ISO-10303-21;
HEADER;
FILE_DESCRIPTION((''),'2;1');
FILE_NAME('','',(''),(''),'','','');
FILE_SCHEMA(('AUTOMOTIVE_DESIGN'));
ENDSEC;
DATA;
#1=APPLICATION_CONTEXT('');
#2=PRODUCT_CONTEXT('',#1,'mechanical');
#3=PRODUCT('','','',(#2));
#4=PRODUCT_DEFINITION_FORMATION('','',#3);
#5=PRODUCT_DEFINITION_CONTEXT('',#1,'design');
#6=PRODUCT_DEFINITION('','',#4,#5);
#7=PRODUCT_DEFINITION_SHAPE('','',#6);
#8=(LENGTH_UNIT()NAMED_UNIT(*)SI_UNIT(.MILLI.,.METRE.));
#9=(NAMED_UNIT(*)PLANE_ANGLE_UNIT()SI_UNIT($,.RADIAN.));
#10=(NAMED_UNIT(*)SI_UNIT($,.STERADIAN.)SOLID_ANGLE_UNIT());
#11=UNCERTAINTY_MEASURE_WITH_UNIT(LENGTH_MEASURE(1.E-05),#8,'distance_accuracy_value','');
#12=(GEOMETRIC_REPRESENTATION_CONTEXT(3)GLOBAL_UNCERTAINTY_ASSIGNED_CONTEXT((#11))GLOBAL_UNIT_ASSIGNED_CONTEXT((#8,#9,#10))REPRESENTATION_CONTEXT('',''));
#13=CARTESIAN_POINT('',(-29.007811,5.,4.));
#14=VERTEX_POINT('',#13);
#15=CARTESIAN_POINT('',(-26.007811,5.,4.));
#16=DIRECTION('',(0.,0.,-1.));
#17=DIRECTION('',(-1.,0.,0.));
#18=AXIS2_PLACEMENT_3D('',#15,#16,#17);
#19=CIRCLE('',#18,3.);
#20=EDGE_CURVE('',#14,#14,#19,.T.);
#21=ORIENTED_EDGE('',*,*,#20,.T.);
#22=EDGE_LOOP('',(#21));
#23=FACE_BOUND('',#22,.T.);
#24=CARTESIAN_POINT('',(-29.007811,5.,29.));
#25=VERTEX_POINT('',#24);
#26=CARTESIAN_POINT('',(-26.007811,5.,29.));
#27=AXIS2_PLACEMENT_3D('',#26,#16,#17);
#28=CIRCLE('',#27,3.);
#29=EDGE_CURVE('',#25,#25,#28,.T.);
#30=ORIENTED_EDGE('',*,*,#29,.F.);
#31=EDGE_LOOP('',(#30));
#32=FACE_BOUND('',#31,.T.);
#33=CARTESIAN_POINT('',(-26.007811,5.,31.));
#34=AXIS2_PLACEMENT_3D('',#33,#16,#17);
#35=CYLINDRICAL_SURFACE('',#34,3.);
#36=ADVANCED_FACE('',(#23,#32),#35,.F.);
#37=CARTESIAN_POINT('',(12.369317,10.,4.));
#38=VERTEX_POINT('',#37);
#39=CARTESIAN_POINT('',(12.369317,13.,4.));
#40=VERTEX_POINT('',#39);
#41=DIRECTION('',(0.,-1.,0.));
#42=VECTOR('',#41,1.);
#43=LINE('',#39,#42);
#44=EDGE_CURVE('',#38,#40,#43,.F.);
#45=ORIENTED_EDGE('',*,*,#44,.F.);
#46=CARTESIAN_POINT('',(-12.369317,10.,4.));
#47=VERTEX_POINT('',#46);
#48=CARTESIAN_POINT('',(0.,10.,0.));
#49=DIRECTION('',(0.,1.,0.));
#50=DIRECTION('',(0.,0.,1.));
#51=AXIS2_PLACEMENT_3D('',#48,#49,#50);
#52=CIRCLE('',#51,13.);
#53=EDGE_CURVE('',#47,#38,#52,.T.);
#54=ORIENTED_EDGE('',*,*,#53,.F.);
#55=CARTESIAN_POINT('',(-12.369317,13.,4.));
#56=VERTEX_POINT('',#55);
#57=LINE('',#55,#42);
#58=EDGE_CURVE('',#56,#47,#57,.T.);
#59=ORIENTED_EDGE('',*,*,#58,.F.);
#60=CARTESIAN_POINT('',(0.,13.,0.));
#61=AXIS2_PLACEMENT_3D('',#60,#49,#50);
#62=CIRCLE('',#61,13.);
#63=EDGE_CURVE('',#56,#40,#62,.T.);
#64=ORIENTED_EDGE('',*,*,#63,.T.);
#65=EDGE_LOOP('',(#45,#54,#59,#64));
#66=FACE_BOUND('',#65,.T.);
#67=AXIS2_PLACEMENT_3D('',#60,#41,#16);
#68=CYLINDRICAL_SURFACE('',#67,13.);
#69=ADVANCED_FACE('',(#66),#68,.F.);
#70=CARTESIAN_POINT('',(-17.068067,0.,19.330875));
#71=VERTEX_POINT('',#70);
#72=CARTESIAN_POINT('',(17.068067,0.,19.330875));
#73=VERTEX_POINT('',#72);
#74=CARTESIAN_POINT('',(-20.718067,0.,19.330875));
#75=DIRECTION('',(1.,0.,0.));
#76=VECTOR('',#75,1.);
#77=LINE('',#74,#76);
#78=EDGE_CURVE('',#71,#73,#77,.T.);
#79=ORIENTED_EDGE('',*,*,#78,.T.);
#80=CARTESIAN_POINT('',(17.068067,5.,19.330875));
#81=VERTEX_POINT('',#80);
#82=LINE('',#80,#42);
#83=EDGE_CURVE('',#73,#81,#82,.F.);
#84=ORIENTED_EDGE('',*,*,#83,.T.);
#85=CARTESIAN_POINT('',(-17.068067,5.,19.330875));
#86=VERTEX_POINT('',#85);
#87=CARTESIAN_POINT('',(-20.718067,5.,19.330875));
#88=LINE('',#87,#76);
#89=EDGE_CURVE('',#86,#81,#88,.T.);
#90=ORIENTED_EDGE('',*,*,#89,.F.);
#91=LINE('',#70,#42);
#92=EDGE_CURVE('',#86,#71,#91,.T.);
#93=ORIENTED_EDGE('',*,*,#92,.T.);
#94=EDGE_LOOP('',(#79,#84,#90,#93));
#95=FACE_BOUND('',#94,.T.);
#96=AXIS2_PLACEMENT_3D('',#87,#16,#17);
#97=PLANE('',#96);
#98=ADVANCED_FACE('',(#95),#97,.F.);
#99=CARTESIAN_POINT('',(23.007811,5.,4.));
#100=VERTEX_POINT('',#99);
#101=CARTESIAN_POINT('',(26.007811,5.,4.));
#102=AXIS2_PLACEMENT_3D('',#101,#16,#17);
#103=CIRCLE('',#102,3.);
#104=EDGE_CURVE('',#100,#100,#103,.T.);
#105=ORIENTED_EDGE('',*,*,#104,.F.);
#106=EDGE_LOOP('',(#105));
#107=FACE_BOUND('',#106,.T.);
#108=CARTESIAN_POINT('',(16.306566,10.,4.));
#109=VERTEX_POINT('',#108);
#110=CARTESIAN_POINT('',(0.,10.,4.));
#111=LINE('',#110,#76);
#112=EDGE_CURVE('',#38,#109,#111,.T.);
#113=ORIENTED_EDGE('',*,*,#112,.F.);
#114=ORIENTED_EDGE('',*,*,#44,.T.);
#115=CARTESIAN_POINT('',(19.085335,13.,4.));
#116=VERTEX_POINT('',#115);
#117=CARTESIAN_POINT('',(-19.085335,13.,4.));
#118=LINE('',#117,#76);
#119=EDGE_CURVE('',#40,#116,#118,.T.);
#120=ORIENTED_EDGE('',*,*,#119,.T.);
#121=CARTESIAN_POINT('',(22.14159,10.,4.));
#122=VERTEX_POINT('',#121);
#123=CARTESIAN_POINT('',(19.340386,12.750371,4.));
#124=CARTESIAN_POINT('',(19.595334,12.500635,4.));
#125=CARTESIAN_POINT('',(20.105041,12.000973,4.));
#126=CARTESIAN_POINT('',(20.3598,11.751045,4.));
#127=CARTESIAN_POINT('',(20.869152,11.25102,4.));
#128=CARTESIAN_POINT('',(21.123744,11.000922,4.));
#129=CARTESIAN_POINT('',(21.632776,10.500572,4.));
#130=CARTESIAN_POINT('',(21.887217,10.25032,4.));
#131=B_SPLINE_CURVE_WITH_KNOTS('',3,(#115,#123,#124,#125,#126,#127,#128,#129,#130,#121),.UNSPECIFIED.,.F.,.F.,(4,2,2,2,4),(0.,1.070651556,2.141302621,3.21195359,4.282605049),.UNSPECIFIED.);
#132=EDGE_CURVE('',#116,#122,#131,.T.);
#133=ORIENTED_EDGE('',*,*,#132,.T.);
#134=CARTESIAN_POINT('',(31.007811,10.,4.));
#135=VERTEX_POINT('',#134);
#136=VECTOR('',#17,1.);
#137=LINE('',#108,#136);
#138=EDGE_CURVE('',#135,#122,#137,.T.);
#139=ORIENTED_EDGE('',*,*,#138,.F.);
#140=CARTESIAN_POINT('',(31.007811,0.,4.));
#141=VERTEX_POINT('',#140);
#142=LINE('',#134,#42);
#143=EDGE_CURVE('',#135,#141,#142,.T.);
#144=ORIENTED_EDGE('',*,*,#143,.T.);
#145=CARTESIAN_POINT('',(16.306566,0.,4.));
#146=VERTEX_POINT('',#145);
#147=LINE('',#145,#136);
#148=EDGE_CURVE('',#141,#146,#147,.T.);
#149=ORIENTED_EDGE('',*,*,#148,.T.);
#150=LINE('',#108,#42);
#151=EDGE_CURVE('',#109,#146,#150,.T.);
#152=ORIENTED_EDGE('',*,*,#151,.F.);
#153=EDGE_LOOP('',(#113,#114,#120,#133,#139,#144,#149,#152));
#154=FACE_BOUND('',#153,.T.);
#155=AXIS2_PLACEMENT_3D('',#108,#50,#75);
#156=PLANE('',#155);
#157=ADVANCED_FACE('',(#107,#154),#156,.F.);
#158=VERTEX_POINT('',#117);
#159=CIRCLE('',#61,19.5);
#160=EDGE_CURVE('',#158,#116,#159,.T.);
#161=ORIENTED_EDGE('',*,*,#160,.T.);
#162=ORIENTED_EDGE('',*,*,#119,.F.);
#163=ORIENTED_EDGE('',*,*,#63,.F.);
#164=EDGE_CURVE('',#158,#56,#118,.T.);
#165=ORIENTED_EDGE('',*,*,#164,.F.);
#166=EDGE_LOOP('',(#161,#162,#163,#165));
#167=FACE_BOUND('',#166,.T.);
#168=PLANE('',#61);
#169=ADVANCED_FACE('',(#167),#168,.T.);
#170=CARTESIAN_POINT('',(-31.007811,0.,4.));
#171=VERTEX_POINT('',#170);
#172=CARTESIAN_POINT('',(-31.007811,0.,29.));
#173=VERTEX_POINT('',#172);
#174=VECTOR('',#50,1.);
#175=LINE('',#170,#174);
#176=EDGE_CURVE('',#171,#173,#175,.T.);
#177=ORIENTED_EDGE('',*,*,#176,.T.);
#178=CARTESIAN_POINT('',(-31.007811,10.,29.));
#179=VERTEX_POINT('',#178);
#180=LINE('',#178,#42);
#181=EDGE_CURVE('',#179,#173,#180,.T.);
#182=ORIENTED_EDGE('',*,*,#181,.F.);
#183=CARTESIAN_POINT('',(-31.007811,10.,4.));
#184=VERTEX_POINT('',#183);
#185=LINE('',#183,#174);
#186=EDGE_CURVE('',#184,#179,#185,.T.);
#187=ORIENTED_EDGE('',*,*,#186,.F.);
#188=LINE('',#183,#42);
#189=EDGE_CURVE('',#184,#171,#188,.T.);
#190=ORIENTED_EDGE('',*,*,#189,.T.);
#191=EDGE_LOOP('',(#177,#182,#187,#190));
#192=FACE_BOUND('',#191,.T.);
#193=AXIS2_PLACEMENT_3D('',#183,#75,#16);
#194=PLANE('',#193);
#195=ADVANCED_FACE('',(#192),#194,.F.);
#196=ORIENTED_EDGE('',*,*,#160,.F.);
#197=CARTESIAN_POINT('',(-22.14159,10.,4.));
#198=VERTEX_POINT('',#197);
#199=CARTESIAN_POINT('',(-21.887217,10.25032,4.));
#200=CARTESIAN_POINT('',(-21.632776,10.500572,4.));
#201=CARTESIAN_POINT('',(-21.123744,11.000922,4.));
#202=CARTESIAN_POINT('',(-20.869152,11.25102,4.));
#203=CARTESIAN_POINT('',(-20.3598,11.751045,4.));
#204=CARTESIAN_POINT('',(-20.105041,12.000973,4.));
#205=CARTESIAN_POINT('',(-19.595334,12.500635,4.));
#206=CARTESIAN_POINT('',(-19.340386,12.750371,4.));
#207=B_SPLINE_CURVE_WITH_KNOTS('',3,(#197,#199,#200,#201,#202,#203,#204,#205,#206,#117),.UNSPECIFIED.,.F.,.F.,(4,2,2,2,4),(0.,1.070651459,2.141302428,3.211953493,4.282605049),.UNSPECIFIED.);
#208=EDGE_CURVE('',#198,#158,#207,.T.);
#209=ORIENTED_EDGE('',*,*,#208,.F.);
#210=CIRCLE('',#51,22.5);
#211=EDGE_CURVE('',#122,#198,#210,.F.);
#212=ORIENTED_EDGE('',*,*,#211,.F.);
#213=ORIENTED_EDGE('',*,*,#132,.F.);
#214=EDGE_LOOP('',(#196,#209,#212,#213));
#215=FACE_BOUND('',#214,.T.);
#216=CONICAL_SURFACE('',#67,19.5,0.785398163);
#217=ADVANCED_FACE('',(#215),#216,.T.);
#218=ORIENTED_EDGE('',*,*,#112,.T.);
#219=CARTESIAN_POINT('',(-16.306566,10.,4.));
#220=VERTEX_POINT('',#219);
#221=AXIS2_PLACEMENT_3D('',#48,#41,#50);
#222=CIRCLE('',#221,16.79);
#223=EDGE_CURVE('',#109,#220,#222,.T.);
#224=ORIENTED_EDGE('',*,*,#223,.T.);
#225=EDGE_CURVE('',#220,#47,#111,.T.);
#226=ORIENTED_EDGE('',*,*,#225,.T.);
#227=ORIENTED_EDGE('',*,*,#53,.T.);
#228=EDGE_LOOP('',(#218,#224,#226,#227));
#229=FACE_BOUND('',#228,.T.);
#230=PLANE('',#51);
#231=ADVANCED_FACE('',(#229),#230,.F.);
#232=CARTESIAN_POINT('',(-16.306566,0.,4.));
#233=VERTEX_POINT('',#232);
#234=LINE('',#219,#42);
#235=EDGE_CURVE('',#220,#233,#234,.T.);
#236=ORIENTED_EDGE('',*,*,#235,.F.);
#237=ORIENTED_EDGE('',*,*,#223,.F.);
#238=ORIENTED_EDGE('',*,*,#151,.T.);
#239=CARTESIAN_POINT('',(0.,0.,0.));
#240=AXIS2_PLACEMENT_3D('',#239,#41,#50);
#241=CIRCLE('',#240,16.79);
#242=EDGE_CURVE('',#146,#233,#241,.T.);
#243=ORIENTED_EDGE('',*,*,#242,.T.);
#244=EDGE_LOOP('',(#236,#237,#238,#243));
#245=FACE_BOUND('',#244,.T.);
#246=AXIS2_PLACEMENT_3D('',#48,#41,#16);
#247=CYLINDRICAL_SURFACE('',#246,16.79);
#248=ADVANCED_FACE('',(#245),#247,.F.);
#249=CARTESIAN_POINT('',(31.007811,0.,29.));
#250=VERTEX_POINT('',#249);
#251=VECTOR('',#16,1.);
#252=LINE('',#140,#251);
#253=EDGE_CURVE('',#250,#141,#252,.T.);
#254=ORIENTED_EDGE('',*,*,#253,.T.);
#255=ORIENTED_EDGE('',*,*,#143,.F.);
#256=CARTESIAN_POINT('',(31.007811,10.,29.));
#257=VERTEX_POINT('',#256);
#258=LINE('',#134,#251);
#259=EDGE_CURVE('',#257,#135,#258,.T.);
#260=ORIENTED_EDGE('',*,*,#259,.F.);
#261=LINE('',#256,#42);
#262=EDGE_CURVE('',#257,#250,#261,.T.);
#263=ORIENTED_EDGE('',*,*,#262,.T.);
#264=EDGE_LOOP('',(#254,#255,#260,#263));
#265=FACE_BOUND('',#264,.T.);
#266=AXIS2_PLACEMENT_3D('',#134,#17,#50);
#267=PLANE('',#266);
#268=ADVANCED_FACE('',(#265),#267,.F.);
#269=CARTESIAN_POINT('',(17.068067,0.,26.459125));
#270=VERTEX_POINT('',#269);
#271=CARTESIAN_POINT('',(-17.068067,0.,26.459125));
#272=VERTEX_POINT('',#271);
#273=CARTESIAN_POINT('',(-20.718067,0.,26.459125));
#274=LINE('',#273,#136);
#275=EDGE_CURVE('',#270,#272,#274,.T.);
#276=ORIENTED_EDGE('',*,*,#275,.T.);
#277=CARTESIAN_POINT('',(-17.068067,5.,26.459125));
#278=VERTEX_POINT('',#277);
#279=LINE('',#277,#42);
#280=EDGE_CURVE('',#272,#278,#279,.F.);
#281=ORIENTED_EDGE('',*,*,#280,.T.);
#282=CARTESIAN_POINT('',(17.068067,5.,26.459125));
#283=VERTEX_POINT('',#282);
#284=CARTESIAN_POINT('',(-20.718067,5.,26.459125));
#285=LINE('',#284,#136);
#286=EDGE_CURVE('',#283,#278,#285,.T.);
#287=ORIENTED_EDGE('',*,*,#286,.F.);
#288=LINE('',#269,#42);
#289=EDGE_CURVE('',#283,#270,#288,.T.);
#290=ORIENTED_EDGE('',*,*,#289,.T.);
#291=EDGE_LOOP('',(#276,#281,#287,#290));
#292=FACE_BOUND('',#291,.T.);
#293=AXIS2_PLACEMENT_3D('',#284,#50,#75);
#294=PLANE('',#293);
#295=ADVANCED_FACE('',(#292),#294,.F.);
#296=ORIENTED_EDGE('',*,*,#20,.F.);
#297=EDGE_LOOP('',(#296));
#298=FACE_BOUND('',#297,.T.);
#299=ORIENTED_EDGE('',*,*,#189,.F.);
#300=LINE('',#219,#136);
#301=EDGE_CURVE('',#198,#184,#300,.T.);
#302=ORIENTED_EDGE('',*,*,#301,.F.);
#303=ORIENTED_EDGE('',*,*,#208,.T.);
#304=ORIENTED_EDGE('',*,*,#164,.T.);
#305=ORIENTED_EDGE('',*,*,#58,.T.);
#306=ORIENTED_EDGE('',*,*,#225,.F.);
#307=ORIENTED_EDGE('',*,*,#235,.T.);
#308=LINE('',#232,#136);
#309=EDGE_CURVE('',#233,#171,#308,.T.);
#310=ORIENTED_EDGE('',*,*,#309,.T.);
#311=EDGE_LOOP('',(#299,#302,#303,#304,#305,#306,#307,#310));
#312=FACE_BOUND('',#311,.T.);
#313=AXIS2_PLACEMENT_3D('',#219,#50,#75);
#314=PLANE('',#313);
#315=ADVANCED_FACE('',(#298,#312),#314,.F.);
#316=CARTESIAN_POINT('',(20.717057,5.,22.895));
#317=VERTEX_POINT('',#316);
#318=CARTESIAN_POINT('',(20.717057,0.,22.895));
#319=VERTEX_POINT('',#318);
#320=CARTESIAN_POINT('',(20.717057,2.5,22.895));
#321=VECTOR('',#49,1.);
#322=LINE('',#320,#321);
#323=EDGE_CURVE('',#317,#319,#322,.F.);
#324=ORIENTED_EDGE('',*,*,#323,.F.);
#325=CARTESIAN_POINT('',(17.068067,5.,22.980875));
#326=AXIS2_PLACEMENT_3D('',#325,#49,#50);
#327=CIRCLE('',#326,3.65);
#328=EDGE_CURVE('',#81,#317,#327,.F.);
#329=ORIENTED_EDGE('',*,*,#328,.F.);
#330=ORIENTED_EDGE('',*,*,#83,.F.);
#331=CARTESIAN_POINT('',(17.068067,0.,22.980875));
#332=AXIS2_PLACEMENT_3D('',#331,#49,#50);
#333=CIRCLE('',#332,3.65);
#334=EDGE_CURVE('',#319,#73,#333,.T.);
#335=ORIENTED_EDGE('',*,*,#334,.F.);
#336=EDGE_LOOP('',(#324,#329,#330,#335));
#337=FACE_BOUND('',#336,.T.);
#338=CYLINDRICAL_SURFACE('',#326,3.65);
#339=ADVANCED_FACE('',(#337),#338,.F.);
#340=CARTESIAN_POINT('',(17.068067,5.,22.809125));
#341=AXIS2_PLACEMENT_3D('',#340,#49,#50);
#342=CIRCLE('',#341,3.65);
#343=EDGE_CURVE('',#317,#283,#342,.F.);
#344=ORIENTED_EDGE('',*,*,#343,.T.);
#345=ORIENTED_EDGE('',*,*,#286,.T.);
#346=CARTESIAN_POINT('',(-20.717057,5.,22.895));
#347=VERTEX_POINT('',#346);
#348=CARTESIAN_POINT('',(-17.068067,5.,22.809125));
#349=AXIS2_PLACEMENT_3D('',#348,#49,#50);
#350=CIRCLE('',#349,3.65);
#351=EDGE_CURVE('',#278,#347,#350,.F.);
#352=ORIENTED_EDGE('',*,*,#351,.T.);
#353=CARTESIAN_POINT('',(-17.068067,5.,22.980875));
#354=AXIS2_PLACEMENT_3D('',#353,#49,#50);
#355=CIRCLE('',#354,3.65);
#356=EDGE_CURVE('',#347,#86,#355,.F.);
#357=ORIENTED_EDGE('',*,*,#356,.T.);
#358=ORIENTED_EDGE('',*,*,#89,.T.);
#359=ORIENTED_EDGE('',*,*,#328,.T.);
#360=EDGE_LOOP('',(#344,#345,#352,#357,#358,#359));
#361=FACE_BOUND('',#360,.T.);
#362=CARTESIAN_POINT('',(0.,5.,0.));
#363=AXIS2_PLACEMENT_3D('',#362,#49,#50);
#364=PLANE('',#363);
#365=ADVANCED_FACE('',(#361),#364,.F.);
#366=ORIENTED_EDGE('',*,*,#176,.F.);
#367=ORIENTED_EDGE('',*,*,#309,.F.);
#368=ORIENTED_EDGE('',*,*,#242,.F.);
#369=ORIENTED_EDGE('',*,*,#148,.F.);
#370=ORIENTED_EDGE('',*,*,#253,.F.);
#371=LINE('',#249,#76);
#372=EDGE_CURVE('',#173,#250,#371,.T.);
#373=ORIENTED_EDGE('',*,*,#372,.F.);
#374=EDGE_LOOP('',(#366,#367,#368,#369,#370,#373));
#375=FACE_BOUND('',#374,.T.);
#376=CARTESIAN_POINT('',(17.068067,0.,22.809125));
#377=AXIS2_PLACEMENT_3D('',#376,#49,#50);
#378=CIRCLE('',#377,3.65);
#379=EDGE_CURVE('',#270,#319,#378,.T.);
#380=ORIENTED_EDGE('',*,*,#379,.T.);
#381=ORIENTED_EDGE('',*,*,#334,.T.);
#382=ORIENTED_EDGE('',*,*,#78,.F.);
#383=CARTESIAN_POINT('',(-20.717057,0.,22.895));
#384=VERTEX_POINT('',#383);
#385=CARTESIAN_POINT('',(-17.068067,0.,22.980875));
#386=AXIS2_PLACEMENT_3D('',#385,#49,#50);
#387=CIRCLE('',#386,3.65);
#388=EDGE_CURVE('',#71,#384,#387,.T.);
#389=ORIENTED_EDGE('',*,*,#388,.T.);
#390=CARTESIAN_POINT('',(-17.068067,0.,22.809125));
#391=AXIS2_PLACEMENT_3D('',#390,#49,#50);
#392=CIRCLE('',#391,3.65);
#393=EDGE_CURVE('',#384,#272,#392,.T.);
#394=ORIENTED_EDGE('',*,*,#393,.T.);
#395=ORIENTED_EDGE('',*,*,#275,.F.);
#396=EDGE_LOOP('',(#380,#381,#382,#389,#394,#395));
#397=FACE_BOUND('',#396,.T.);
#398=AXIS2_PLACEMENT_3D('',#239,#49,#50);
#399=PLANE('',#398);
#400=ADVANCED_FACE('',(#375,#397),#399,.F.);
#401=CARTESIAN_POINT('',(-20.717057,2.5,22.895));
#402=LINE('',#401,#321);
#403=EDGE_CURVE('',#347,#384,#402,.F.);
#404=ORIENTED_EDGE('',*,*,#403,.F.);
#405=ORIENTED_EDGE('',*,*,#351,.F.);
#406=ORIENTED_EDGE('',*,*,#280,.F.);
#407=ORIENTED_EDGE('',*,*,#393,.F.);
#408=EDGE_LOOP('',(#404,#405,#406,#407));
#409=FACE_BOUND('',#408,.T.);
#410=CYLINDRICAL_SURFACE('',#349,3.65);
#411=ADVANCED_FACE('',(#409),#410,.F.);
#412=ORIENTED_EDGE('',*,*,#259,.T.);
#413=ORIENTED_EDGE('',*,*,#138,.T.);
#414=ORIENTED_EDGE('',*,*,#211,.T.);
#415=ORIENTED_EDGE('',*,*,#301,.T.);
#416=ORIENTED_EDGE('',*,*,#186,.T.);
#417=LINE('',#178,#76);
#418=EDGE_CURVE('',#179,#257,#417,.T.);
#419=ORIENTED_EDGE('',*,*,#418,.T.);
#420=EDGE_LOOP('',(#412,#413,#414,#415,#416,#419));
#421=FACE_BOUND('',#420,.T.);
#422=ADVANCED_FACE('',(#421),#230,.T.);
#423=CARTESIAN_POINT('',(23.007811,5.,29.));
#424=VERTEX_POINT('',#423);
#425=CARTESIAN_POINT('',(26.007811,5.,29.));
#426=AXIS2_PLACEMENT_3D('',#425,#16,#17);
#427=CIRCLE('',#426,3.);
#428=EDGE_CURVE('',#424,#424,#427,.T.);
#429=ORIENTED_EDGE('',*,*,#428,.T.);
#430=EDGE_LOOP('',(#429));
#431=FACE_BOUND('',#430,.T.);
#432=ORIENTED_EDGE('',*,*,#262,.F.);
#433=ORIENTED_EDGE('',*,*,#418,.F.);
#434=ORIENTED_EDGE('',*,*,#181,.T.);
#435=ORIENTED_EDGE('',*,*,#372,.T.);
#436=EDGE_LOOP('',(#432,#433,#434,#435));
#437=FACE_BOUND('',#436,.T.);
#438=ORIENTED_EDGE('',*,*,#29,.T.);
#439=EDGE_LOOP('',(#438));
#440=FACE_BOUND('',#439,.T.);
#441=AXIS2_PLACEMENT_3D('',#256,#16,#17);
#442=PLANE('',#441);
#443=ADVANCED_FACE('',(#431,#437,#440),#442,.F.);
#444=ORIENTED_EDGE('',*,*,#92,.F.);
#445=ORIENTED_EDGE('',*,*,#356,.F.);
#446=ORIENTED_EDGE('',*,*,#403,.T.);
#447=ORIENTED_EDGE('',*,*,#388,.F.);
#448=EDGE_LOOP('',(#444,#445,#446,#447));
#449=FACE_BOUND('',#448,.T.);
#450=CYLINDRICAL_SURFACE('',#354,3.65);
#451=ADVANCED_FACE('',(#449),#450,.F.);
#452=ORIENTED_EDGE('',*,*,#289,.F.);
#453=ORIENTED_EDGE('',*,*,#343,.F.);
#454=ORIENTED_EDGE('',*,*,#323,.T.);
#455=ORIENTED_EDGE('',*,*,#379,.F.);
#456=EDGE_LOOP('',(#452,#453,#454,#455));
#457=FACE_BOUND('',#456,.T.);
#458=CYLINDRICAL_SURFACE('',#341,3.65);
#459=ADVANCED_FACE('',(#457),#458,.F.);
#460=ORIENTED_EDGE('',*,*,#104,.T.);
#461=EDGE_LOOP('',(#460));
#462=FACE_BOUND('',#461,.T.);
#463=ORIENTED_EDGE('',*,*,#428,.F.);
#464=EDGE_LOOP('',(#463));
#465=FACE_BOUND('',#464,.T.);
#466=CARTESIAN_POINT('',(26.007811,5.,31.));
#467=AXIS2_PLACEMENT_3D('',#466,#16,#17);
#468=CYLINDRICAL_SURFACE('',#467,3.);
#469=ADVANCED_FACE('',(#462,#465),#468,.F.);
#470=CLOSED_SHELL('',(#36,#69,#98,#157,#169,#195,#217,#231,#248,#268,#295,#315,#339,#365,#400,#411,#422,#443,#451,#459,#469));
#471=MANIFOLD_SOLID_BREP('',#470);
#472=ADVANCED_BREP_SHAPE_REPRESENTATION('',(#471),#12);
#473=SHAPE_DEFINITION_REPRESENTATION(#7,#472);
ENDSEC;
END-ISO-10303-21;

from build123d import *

# Parameters (mm, degrees)
BOSS_EXTRUDE1_DEPTH = 10
SKETCH2_R           = 3
CUT_EXTRUDE1_DEPTH  = 27
SKETCH4_R           = 19.5
SKETCH4_R_2         = 13
BOSS_EXTRUDE2_DEPTH = 3
CUT_EXTRUDE2_DEPTH  = 8
CHAMFER1_SIZE       = 3
SKETCH6_W           = 41.436134758
SKETCH6_H           = 7.128250764
CUT_EXTRUDE3_DEPTH  = 5
FILLET1_R           = 3.65


# Some blends are built 0.0001 mm under size
with BuildPart() as part:
    # Sketch1 → Boss-Extrude1 (new body)
    with BuildSketch(Plane(origin=(0, 0, 0), x_dir=(1, 0, 0), z_dir=(0, 1, 0))):
        with BuildLine():
            Line((-16.306566162, -4), (-31.007810594, -4))
            Line((-31.007810594, -4), (-31.007810594, -29))
            Line((-31.007810594, -29), (-22, -29))
            Line((-22, -29), (22, -29))
            Line((22, -29), (31.007810594, -29))
            Line((31.007810594, -29), (31.007810594, -4))
            Line((31.007810594, -4), (16.306566162, -4))
            ThreePointArc((16.306566162, -4), (0, -16.79), (-16.306566162, -4))
        make_face()
    extrude(amount=BOSS_EXTRUDE1_DEPTH)

    # Sketch2 → Cut-Extrude1 (cut)
    with BuildSketch(Plane(origin=(0, 0, 4), x_dir=(-1, 0, 0), z_dir=(0, 0, -1))):
        with Locations((-26.007810594, 5)):
            Circle(SKETCH2_R)
        with Locations((26.007810594, 5)):
            Circle(SKETCH2_R)
    extrude(amount=-CUT_EXTRUDE1_DEPTH, mode=Mode.SUBTRACT)

    # Sketch4 → Boss-Extrude2 (add)
    with BuildSketch(Plane(origin=(0, 10, 0), x_dir=(1, 0, 0), z_dir=(0, 1, 0))):
        with Locations(Location((0, 0, 0), (0, 0, 348.162995844))):
            Circle(SKETCH4_R)
        with Locations(Location((0, 0, 0), (0, 0, 270))):
            Circle(SKETCH4_R_2, mode=Mode.SUBTRACT)
    extrude(amount=BOSS_EXTRUDE2_DEPTH)

    # Sketch5 → Cut-Extrude2 (cut)
    with BuildSketch(Plane(origin=(0, 13, 0), x_dir=(1, 0, 0), z_dir=(0, 1, 0))):
        Polygon((-19.085334684, -4), (-23.625672229, -4), (-23.625672229, 24.113520256), (25.409917146, 24.113520256), (25.409917146, -4), align=None)
    extrude(amount=-CUT_EXTRUDE2_DEPTH, mode=Mode.SUBTRACT)

    # Chamfer1
    chamfer1_edges = [part.edges().sort_by_distance(p)[0] for p in [
        (0, 10, 19.5),
    ]]
    chamfer(chamfer1_edges, length=CHAMFER1_SIZE - 0.0001)  # a hair under: the kernel refuses the full size

    # Sketch6 → Cut-Extrude3 (cut)
    with BuildSketch(Plane.XZ):
        with Locations((0, 22.895)):
            Rectangle(SKETCH6_W, SKETCH6_H)
    extrude(amount=-CUT_EXTRUDE3_DEPTH, mode=Mode.SUBTRACT)

    # Fillet1
    # the kernel refuses this fillet: 3.65 mm, written as the material it adds along each edge
    with BuildSketch(Plane(origin=(-20.718067379, 0, 19.330874618), x_dir=(0, 0, 1), z_dir=(0, 1, 0))) as fillet1_piece_1:
        with BuildLine():
            CenterArc((FILLET1_R, FILLET1_R), FILLET1_R, 180, 90)
            Line((0, FILLET1_R), (0, 0))
            Line((0, 0), (FILLET1_R, 0))
        make_face()
    extrude(amount=5)
    with BuildSketch(Plane(origin=(-20.718067379, 0, 26.459125382), x_dir=(0, 0, -1), z_dir=(0, 1, 0)), Plane(origin=(20.718067379, 0, 26.459125382), x_dir=(-1, 0, 0), z_dir=(0, 1, 0)), Plane(origin=(20.718067379, 0, 19.330874618), x_dir=(0, 0, 1), z_dir=(0, 1, 0))) as fillet1_piece_2:
        with BuildLine():
            CenterArc((FILLET1_R, -FILLET1_R), FILLET1_R, 90, 90)
            Line((0, -FILLET1_R), (0, 0))
            Line((0, 0), (FILLET1_R, 0))
        make_face()
    extrude(amount=5)


solid = part.part
